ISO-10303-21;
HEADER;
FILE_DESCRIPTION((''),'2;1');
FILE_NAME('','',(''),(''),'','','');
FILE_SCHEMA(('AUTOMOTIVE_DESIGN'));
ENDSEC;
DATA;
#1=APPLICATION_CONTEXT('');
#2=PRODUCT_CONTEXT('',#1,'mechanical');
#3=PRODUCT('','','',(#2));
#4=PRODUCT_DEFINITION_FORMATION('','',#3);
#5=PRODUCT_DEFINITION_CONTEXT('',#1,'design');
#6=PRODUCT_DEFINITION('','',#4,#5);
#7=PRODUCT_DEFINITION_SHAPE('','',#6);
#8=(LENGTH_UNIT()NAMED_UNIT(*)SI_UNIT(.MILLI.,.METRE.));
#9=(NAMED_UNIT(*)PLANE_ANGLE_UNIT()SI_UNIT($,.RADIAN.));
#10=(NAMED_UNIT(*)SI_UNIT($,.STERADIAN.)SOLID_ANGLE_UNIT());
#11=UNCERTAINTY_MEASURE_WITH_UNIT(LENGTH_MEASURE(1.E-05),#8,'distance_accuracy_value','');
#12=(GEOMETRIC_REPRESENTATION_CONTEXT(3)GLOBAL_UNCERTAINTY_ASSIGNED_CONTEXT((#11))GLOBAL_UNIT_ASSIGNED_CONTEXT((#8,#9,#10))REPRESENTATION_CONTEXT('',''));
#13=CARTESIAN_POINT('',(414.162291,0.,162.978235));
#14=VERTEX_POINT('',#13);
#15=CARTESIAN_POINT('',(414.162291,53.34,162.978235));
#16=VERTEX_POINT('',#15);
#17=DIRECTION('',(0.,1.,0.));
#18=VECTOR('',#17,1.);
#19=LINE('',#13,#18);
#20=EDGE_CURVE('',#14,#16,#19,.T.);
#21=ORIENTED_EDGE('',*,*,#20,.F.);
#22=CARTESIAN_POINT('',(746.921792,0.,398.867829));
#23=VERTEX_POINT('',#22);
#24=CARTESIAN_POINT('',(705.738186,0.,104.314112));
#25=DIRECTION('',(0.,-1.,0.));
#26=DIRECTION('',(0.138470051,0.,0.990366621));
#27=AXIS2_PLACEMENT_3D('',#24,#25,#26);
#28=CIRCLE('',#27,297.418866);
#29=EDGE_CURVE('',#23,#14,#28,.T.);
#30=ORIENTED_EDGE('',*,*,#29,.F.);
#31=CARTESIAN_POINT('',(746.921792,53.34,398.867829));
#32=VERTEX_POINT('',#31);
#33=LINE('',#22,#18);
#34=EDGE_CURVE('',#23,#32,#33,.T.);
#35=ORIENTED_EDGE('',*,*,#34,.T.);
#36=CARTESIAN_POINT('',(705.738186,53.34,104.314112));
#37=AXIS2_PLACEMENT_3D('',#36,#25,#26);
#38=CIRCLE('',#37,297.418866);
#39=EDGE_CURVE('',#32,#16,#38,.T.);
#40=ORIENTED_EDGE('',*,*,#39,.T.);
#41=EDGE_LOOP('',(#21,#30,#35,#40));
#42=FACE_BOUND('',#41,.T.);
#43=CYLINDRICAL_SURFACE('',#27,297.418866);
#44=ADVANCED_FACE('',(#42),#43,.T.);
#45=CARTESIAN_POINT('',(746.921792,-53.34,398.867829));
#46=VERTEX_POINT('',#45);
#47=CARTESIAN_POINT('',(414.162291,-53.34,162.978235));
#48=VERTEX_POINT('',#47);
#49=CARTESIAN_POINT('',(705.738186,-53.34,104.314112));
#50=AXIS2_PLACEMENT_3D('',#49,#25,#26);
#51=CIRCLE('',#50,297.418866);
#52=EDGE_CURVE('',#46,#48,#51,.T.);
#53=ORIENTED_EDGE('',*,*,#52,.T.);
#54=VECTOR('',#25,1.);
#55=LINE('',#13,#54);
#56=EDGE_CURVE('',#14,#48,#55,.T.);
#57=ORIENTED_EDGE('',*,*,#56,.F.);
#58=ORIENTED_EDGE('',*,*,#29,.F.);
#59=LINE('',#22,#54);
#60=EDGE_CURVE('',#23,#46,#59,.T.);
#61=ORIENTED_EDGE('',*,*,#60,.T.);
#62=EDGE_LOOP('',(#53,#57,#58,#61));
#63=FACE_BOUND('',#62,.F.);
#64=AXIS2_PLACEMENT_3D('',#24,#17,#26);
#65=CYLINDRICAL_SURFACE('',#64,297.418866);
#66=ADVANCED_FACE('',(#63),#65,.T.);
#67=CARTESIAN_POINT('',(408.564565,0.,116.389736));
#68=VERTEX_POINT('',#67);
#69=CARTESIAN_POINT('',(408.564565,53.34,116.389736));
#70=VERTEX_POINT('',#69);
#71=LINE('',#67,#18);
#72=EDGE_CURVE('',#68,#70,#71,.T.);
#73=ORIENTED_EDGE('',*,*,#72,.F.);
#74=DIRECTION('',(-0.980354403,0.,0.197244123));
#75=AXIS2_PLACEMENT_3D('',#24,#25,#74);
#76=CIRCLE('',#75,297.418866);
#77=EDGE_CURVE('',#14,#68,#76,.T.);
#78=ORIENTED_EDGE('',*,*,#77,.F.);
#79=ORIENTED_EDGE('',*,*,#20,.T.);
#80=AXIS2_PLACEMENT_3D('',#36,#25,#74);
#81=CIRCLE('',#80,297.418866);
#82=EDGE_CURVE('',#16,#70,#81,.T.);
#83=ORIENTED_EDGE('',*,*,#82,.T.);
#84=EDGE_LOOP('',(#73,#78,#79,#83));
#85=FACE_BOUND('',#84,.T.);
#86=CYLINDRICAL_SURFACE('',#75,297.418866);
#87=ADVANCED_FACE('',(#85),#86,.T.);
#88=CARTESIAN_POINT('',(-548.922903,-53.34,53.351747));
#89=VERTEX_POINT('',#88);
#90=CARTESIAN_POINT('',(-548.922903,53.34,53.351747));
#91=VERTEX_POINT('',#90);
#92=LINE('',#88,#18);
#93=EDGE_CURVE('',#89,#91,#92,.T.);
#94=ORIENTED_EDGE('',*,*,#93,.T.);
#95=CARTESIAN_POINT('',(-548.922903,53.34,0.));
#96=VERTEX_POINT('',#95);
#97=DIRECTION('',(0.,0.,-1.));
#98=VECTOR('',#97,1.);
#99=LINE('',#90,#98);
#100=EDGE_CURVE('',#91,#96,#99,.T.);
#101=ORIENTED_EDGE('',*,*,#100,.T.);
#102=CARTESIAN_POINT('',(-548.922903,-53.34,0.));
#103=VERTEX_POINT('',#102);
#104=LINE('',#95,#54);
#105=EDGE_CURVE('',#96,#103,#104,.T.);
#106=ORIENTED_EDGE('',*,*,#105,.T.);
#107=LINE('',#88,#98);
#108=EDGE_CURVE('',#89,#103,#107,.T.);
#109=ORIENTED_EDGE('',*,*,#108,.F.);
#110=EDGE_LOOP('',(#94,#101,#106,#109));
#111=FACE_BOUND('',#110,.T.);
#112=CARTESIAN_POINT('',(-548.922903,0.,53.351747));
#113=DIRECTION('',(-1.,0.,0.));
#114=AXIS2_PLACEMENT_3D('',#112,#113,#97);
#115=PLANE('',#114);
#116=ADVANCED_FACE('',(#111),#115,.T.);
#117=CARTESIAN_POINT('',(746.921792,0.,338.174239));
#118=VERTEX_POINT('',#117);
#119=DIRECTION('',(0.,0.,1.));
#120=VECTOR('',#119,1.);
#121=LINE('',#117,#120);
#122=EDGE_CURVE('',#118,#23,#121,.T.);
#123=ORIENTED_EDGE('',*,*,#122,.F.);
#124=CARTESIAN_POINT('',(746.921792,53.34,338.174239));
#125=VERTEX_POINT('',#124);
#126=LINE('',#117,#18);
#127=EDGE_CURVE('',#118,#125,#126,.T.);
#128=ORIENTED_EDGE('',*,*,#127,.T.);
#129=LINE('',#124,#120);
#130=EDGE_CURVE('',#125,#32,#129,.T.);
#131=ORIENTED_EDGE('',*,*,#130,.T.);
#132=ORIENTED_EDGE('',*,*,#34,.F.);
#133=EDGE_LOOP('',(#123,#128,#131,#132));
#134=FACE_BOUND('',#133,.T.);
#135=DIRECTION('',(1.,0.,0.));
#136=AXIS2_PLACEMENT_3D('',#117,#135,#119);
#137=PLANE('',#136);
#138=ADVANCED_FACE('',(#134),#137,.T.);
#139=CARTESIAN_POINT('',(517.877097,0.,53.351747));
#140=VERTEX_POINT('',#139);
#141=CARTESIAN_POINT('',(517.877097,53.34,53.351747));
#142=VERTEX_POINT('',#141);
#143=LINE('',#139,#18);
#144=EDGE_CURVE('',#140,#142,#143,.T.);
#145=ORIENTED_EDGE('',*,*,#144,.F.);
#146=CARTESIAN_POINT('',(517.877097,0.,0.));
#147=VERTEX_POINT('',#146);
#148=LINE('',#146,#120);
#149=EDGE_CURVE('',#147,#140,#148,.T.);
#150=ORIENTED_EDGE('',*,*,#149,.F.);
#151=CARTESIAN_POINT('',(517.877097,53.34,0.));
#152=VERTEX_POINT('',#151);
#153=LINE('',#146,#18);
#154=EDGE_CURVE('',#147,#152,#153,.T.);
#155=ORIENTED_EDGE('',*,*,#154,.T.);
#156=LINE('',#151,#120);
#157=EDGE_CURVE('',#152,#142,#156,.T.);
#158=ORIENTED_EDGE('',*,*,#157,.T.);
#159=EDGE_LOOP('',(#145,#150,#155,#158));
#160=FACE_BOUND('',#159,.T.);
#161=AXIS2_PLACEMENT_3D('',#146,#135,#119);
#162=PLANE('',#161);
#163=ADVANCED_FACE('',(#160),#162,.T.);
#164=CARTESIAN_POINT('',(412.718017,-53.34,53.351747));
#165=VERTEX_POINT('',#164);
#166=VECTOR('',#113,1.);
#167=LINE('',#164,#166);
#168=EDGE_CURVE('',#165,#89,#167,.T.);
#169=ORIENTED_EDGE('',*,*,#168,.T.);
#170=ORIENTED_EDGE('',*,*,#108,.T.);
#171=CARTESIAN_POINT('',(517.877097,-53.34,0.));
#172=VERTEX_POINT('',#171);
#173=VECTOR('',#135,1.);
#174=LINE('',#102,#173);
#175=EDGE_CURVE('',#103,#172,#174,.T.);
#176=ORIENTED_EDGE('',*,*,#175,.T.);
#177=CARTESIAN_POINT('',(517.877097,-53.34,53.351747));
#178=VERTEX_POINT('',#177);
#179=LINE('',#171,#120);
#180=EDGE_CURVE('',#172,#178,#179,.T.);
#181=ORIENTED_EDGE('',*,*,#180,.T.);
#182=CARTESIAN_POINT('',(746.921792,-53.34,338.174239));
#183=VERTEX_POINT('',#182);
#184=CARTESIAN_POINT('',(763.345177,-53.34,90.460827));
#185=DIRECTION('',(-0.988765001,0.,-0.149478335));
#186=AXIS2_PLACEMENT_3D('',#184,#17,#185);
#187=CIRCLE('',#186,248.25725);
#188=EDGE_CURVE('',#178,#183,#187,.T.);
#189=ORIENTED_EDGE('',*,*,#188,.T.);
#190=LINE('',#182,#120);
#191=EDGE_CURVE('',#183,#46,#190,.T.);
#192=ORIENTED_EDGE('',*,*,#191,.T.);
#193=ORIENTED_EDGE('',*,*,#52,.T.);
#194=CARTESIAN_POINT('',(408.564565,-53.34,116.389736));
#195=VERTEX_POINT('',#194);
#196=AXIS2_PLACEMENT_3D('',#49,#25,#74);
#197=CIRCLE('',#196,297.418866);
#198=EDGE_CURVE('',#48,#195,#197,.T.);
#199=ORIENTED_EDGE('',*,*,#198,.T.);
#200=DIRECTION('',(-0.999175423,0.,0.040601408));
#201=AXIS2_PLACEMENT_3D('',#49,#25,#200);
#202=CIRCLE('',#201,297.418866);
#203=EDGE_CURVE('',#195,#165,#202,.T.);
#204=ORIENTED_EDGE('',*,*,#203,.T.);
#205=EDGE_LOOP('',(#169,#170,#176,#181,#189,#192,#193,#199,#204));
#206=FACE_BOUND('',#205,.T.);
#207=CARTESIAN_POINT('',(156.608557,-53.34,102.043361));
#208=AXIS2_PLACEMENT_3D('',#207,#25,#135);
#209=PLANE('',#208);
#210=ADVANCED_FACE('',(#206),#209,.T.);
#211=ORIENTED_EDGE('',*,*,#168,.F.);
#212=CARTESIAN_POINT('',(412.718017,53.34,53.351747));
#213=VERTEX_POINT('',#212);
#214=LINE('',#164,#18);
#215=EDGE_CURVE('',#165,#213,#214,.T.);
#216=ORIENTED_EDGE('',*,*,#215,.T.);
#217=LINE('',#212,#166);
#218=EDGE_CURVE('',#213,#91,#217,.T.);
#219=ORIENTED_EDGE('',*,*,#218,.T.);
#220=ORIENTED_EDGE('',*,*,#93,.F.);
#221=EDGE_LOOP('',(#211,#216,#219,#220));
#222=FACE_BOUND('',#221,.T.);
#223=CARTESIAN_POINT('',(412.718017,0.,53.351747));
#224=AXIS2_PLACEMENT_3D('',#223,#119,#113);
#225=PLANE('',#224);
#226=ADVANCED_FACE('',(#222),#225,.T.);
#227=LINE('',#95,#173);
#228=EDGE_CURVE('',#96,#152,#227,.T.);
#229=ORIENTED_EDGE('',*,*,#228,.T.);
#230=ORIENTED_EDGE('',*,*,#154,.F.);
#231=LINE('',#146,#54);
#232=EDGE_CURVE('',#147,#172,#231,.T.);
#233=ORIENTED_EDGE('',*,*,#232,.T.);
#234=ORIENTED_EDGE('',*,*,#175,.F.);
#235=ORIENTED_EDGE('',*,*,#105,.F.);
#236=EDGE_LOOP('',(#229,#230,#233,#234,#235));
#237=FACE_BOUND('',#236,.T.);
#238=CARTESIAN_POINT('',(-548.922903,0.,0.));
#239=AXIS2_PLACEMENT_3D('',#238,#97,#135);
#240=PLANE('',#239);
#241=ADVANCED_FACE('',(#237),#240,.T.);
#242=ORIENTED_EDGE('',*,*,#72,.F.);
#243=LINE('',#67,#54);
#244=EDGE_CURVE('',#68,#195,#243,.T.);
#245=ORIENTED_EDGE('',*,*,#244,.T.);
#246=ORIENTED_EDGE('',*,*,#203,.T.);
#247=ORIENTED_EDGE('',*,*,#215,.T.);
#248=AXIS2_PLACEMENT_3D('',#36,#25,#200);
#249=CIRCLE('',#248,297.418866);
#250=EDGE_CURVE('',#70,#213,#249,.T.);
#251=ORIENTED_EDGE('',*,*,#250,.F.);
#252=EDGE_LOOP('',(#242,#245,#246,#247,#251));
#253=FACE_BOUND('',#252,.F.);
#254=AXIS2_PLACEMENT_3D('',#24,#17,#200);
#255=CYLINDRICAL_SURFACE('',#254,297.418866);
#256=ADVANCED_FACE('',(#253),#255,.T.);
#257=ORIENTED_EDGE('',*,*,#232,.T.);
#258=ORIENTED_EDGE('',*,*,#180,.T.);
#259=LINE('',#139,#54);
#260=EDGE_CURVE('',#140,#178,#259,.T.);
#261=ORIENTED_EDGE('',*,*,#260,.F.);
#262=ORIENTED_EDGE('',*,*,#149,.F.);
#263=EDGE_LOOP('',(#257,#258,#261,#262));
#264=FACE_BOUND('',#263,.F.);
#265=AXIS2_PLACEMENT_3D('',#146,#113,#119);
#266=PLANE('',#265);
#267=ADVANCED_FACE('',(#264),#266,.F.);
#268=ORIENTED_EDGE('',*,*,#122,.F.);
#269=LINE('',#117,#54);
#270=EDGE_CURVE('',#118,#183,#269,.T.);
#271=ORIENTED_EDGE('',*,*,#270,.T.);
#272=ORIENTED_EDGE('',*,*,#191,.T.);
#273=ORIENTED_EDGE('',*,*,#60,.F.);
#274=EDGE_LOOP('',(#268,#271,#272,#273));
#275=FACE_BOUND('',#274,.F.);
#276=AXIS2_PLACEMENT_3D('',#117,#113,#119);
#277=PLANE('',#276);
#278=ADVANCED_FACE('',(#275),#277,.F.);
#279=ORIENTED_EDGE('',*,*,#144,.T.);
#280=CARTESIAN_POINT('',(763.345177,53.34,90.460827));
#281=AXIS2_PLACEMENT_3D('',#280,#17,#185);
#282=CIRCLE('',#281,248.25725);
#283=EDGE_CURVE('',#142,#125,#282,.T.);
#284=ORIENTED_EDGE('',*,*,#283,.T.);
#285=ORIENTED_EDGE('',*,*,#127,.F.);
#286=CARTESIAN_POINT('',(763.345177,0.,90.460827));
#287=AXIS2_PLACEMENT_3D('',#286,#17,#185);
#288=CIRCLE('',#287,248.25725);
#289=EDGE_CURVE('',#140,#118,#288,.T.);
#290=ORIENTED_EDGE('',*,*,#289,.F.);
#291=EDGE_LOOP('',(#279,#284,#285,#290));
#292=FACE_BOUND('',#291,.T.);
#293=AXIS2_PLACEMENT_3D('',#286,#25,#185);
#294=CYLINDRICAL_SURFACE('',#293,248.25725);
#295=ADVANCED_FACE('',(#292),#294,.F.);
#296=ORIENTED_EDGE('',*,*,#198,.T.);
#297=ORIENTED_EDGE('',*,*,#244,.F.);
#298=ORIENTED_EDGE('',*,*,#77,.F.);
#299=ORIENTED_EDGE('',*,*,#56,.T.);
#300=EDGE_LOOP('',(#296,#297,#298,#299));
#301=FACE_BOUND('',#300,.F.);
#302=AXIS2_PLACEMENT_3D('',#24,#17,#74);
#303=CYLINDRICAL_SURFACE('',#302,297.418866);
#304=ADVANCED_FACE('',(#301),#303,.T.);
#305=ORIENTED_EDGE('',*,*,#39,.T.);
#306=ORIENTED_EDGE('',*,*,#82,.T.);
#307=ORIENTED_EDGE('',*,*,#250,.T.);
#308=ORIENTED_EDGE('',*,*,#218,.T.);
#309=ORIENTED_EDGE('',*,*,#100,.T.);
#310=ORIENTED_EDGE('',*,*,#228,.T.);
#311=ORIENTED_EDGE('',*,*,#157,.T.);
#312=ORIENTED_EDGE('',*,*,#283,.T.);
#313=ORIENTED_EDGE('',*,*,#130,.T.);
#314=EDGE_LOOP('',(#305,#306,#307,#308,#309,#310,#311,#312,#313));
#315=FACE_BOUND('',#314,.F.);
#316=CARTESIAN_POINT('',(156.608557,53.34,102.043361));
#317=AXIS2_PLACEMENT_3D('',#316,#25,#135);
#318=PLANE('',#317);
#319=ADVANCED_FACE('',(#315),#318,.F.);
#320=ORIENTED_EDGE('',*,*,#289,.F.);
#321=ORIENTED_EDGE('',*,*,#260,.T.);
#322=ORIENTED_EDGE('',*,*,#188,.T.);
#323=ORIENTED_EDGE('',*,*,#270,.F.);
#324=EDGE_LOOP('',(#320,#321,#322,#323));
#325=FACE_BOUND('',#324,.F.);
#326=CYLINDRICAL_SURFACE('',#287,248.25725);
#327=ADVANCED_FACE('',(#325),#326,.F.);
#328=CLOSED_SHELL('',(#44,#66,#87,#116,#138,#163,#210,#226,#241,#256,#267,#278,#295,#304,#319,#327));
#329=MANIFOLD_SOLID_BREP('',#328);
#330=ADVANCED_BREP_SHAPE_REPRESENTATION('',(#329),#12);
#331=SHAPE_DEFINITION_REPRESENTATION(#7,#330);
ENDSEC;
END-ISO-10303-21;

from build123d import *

# Parameters (mm, degrees)
F4_DEPTH = 53.34


# Not quite as in the source:
# - the program builds the solid bodies; features that only make, move or delete a surface that nothing else refers to are left out


with BuildPart() as f4:
    # F0 (on Front) → F4 (new body, symmetric)
    with BuildSketch(Plane.XZ):
        with BuildLine():
            Line((-548.9229032603, 53.3517466559), (-548.9229032603, 0))
            Line((-548.9229032603, 0), (517.8770967397, 0))
            Line((517.8770967397, 0), (517.8770967397, 53.3517466559))
            ThreePointArc((517.8770967397, 53.3517466559), (569.8826534338, 246.0368993204), (746.9217918528, 338.1742394829))
            Line((746.9217918528, 338.1742394829), (746.9217918528, 398.8678294032))
            ThreePointArc((746.9217918528, 398.8678294032), (533.7351343449, 346.9515616778), (414.162291011, 162.9782349944))
            ThreePointArc((414.162291011, 162.9782349944), (410.443214336, 139.7945515932), (408.564564689, 116.3897362155))
            ThreePointArc((408.564564689, 116.3897362155), (408.9628088542, 84.760149458), (412.718017276, 53.3517466559))
            Line((412.718017276, 53.3517466559), (111.3264834418, 53.3517466559))
            Line((111.3264834418, 53.3517466559), (78.2992156876, 53.3517466559))
            Line((78.2992156876, 53.3517466559), (0, 53.3517466559))
            Line((0, 53.3517466559), (-548.9229032603, 53.3517466559))
        make_face()
    extrude(amount=F4_DEPTH, both=True)


solid = f4.part
